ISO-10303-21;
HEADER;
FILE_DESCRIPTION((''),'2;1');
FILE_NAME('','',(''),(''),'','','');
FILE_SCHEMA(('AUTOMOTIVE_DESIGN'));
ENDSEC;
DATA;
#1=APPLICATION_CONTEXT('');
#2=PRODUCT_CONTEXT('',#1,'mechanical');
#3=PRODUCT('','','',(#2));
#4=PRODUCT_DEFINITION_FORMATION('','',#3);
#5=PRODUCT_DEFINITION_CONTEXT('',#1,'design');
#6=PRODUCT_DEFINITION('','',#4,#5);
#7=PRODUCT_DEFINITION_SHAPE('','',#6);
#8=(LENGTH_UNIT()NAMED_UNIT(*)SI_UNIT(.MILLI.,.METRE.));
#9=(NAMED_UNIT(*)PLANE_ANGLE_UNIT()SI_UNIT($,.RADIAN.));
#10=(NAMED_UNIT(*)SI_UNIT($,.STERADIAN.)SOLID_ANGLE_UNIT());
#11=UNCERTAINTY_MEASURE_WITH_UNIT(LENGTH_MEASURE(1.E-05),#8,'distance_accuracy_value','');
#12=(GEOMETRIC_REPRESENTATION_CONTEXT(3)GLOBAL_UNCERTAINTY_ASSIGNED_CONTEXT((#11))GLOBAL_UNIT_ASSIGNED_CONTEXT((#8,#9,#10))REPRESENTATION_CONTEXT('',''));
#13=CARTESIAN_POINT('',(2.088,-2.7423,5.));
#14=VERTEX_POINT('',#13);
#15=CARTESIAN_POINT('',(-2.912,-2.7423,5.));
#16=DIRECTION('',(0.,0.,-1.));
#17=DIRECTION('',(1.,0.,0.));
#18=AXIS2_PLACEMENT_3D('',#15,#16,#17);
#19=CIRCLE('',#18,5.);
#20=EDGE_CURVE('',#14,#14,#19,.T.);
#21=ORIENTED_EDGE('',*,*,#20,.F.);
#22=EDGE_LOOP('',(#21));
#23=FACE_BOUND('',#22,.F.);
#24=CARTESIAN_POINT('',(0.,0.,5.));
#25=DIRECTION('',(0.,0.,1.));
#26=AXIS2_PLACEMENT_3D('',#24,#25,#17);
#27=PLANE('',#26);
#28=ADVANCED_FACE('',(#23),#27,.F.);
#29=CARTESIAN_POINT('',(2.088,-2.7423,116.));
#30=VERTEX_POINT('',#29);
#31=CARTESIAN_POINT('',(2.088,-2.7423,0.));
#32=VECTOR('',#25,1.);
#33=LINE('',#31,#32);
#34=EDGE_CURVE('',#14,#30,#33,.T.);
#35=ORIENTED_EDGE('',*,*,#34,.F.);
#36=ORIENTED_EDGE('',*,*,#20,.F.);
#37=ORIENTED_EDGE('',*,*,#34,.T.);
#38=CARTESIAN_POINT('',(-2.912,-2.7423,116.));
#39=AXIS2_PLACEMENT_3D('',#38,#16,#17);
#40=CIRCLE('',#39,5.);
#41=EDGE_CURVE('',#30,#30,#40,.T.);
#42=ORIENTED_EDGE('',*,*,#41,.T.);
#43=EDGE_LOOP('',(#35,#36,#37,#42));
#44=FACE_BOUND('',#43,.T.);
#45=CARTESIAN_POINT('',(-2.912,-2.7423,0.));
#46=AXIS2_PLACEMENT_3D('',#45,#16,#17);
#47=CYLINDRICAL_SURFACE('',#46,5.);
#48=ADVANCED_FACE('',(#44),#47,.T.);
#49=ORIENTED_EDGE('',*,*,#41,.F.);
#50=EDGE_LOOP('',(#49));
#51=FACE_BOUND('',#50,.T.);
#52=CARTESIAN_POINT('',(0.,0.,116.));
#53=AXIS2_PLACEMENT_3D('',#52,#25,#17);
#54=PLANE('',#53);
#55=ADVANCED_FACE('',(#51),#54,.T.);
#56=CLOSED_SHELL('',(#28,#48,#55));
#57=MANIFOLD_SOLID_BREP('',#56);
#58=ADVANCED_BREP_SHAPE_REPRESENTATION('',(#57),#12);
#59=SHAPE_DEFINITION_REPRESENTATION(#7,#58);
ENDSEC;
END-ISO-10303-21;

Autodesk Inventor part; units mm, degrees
ref_plane "YZ Plane" through (0, 0, 0) normal (1, 0, 0) x (0, 1, 0)
ref_plane "XZ Plane" through (0, 0, 0) normal (0, 1, 0) x (-1, 0, 0)
ref_plane "XY Plane" through (0, 0, 0) normal (0, 0, 1) x (1, 0, 0)
sketch "Szkic1" plane through (0, 0, 0) normal (0, 0, 1) x (1, 0, 0)
  circle A0 centre (-2.912, -2.7423) radius 5.3 projected
  circle A1 centre (-2.912, -2.7423) radius 5
  point P0 (0, 0)
  dimension "d0" = 10
extrude "Wyciągnięcie proste1" add sketch "Szkic1" along normal blind 120 contours A1
move faces "Przesuń1" translate (0, 0, 5) faces at (-3.1129, -4.3968, 0)
move faces "Przesuń2" translate (0, 0, -4) faces at (-4.5787, -2.7423, 120)
properties part number "wał_2"
